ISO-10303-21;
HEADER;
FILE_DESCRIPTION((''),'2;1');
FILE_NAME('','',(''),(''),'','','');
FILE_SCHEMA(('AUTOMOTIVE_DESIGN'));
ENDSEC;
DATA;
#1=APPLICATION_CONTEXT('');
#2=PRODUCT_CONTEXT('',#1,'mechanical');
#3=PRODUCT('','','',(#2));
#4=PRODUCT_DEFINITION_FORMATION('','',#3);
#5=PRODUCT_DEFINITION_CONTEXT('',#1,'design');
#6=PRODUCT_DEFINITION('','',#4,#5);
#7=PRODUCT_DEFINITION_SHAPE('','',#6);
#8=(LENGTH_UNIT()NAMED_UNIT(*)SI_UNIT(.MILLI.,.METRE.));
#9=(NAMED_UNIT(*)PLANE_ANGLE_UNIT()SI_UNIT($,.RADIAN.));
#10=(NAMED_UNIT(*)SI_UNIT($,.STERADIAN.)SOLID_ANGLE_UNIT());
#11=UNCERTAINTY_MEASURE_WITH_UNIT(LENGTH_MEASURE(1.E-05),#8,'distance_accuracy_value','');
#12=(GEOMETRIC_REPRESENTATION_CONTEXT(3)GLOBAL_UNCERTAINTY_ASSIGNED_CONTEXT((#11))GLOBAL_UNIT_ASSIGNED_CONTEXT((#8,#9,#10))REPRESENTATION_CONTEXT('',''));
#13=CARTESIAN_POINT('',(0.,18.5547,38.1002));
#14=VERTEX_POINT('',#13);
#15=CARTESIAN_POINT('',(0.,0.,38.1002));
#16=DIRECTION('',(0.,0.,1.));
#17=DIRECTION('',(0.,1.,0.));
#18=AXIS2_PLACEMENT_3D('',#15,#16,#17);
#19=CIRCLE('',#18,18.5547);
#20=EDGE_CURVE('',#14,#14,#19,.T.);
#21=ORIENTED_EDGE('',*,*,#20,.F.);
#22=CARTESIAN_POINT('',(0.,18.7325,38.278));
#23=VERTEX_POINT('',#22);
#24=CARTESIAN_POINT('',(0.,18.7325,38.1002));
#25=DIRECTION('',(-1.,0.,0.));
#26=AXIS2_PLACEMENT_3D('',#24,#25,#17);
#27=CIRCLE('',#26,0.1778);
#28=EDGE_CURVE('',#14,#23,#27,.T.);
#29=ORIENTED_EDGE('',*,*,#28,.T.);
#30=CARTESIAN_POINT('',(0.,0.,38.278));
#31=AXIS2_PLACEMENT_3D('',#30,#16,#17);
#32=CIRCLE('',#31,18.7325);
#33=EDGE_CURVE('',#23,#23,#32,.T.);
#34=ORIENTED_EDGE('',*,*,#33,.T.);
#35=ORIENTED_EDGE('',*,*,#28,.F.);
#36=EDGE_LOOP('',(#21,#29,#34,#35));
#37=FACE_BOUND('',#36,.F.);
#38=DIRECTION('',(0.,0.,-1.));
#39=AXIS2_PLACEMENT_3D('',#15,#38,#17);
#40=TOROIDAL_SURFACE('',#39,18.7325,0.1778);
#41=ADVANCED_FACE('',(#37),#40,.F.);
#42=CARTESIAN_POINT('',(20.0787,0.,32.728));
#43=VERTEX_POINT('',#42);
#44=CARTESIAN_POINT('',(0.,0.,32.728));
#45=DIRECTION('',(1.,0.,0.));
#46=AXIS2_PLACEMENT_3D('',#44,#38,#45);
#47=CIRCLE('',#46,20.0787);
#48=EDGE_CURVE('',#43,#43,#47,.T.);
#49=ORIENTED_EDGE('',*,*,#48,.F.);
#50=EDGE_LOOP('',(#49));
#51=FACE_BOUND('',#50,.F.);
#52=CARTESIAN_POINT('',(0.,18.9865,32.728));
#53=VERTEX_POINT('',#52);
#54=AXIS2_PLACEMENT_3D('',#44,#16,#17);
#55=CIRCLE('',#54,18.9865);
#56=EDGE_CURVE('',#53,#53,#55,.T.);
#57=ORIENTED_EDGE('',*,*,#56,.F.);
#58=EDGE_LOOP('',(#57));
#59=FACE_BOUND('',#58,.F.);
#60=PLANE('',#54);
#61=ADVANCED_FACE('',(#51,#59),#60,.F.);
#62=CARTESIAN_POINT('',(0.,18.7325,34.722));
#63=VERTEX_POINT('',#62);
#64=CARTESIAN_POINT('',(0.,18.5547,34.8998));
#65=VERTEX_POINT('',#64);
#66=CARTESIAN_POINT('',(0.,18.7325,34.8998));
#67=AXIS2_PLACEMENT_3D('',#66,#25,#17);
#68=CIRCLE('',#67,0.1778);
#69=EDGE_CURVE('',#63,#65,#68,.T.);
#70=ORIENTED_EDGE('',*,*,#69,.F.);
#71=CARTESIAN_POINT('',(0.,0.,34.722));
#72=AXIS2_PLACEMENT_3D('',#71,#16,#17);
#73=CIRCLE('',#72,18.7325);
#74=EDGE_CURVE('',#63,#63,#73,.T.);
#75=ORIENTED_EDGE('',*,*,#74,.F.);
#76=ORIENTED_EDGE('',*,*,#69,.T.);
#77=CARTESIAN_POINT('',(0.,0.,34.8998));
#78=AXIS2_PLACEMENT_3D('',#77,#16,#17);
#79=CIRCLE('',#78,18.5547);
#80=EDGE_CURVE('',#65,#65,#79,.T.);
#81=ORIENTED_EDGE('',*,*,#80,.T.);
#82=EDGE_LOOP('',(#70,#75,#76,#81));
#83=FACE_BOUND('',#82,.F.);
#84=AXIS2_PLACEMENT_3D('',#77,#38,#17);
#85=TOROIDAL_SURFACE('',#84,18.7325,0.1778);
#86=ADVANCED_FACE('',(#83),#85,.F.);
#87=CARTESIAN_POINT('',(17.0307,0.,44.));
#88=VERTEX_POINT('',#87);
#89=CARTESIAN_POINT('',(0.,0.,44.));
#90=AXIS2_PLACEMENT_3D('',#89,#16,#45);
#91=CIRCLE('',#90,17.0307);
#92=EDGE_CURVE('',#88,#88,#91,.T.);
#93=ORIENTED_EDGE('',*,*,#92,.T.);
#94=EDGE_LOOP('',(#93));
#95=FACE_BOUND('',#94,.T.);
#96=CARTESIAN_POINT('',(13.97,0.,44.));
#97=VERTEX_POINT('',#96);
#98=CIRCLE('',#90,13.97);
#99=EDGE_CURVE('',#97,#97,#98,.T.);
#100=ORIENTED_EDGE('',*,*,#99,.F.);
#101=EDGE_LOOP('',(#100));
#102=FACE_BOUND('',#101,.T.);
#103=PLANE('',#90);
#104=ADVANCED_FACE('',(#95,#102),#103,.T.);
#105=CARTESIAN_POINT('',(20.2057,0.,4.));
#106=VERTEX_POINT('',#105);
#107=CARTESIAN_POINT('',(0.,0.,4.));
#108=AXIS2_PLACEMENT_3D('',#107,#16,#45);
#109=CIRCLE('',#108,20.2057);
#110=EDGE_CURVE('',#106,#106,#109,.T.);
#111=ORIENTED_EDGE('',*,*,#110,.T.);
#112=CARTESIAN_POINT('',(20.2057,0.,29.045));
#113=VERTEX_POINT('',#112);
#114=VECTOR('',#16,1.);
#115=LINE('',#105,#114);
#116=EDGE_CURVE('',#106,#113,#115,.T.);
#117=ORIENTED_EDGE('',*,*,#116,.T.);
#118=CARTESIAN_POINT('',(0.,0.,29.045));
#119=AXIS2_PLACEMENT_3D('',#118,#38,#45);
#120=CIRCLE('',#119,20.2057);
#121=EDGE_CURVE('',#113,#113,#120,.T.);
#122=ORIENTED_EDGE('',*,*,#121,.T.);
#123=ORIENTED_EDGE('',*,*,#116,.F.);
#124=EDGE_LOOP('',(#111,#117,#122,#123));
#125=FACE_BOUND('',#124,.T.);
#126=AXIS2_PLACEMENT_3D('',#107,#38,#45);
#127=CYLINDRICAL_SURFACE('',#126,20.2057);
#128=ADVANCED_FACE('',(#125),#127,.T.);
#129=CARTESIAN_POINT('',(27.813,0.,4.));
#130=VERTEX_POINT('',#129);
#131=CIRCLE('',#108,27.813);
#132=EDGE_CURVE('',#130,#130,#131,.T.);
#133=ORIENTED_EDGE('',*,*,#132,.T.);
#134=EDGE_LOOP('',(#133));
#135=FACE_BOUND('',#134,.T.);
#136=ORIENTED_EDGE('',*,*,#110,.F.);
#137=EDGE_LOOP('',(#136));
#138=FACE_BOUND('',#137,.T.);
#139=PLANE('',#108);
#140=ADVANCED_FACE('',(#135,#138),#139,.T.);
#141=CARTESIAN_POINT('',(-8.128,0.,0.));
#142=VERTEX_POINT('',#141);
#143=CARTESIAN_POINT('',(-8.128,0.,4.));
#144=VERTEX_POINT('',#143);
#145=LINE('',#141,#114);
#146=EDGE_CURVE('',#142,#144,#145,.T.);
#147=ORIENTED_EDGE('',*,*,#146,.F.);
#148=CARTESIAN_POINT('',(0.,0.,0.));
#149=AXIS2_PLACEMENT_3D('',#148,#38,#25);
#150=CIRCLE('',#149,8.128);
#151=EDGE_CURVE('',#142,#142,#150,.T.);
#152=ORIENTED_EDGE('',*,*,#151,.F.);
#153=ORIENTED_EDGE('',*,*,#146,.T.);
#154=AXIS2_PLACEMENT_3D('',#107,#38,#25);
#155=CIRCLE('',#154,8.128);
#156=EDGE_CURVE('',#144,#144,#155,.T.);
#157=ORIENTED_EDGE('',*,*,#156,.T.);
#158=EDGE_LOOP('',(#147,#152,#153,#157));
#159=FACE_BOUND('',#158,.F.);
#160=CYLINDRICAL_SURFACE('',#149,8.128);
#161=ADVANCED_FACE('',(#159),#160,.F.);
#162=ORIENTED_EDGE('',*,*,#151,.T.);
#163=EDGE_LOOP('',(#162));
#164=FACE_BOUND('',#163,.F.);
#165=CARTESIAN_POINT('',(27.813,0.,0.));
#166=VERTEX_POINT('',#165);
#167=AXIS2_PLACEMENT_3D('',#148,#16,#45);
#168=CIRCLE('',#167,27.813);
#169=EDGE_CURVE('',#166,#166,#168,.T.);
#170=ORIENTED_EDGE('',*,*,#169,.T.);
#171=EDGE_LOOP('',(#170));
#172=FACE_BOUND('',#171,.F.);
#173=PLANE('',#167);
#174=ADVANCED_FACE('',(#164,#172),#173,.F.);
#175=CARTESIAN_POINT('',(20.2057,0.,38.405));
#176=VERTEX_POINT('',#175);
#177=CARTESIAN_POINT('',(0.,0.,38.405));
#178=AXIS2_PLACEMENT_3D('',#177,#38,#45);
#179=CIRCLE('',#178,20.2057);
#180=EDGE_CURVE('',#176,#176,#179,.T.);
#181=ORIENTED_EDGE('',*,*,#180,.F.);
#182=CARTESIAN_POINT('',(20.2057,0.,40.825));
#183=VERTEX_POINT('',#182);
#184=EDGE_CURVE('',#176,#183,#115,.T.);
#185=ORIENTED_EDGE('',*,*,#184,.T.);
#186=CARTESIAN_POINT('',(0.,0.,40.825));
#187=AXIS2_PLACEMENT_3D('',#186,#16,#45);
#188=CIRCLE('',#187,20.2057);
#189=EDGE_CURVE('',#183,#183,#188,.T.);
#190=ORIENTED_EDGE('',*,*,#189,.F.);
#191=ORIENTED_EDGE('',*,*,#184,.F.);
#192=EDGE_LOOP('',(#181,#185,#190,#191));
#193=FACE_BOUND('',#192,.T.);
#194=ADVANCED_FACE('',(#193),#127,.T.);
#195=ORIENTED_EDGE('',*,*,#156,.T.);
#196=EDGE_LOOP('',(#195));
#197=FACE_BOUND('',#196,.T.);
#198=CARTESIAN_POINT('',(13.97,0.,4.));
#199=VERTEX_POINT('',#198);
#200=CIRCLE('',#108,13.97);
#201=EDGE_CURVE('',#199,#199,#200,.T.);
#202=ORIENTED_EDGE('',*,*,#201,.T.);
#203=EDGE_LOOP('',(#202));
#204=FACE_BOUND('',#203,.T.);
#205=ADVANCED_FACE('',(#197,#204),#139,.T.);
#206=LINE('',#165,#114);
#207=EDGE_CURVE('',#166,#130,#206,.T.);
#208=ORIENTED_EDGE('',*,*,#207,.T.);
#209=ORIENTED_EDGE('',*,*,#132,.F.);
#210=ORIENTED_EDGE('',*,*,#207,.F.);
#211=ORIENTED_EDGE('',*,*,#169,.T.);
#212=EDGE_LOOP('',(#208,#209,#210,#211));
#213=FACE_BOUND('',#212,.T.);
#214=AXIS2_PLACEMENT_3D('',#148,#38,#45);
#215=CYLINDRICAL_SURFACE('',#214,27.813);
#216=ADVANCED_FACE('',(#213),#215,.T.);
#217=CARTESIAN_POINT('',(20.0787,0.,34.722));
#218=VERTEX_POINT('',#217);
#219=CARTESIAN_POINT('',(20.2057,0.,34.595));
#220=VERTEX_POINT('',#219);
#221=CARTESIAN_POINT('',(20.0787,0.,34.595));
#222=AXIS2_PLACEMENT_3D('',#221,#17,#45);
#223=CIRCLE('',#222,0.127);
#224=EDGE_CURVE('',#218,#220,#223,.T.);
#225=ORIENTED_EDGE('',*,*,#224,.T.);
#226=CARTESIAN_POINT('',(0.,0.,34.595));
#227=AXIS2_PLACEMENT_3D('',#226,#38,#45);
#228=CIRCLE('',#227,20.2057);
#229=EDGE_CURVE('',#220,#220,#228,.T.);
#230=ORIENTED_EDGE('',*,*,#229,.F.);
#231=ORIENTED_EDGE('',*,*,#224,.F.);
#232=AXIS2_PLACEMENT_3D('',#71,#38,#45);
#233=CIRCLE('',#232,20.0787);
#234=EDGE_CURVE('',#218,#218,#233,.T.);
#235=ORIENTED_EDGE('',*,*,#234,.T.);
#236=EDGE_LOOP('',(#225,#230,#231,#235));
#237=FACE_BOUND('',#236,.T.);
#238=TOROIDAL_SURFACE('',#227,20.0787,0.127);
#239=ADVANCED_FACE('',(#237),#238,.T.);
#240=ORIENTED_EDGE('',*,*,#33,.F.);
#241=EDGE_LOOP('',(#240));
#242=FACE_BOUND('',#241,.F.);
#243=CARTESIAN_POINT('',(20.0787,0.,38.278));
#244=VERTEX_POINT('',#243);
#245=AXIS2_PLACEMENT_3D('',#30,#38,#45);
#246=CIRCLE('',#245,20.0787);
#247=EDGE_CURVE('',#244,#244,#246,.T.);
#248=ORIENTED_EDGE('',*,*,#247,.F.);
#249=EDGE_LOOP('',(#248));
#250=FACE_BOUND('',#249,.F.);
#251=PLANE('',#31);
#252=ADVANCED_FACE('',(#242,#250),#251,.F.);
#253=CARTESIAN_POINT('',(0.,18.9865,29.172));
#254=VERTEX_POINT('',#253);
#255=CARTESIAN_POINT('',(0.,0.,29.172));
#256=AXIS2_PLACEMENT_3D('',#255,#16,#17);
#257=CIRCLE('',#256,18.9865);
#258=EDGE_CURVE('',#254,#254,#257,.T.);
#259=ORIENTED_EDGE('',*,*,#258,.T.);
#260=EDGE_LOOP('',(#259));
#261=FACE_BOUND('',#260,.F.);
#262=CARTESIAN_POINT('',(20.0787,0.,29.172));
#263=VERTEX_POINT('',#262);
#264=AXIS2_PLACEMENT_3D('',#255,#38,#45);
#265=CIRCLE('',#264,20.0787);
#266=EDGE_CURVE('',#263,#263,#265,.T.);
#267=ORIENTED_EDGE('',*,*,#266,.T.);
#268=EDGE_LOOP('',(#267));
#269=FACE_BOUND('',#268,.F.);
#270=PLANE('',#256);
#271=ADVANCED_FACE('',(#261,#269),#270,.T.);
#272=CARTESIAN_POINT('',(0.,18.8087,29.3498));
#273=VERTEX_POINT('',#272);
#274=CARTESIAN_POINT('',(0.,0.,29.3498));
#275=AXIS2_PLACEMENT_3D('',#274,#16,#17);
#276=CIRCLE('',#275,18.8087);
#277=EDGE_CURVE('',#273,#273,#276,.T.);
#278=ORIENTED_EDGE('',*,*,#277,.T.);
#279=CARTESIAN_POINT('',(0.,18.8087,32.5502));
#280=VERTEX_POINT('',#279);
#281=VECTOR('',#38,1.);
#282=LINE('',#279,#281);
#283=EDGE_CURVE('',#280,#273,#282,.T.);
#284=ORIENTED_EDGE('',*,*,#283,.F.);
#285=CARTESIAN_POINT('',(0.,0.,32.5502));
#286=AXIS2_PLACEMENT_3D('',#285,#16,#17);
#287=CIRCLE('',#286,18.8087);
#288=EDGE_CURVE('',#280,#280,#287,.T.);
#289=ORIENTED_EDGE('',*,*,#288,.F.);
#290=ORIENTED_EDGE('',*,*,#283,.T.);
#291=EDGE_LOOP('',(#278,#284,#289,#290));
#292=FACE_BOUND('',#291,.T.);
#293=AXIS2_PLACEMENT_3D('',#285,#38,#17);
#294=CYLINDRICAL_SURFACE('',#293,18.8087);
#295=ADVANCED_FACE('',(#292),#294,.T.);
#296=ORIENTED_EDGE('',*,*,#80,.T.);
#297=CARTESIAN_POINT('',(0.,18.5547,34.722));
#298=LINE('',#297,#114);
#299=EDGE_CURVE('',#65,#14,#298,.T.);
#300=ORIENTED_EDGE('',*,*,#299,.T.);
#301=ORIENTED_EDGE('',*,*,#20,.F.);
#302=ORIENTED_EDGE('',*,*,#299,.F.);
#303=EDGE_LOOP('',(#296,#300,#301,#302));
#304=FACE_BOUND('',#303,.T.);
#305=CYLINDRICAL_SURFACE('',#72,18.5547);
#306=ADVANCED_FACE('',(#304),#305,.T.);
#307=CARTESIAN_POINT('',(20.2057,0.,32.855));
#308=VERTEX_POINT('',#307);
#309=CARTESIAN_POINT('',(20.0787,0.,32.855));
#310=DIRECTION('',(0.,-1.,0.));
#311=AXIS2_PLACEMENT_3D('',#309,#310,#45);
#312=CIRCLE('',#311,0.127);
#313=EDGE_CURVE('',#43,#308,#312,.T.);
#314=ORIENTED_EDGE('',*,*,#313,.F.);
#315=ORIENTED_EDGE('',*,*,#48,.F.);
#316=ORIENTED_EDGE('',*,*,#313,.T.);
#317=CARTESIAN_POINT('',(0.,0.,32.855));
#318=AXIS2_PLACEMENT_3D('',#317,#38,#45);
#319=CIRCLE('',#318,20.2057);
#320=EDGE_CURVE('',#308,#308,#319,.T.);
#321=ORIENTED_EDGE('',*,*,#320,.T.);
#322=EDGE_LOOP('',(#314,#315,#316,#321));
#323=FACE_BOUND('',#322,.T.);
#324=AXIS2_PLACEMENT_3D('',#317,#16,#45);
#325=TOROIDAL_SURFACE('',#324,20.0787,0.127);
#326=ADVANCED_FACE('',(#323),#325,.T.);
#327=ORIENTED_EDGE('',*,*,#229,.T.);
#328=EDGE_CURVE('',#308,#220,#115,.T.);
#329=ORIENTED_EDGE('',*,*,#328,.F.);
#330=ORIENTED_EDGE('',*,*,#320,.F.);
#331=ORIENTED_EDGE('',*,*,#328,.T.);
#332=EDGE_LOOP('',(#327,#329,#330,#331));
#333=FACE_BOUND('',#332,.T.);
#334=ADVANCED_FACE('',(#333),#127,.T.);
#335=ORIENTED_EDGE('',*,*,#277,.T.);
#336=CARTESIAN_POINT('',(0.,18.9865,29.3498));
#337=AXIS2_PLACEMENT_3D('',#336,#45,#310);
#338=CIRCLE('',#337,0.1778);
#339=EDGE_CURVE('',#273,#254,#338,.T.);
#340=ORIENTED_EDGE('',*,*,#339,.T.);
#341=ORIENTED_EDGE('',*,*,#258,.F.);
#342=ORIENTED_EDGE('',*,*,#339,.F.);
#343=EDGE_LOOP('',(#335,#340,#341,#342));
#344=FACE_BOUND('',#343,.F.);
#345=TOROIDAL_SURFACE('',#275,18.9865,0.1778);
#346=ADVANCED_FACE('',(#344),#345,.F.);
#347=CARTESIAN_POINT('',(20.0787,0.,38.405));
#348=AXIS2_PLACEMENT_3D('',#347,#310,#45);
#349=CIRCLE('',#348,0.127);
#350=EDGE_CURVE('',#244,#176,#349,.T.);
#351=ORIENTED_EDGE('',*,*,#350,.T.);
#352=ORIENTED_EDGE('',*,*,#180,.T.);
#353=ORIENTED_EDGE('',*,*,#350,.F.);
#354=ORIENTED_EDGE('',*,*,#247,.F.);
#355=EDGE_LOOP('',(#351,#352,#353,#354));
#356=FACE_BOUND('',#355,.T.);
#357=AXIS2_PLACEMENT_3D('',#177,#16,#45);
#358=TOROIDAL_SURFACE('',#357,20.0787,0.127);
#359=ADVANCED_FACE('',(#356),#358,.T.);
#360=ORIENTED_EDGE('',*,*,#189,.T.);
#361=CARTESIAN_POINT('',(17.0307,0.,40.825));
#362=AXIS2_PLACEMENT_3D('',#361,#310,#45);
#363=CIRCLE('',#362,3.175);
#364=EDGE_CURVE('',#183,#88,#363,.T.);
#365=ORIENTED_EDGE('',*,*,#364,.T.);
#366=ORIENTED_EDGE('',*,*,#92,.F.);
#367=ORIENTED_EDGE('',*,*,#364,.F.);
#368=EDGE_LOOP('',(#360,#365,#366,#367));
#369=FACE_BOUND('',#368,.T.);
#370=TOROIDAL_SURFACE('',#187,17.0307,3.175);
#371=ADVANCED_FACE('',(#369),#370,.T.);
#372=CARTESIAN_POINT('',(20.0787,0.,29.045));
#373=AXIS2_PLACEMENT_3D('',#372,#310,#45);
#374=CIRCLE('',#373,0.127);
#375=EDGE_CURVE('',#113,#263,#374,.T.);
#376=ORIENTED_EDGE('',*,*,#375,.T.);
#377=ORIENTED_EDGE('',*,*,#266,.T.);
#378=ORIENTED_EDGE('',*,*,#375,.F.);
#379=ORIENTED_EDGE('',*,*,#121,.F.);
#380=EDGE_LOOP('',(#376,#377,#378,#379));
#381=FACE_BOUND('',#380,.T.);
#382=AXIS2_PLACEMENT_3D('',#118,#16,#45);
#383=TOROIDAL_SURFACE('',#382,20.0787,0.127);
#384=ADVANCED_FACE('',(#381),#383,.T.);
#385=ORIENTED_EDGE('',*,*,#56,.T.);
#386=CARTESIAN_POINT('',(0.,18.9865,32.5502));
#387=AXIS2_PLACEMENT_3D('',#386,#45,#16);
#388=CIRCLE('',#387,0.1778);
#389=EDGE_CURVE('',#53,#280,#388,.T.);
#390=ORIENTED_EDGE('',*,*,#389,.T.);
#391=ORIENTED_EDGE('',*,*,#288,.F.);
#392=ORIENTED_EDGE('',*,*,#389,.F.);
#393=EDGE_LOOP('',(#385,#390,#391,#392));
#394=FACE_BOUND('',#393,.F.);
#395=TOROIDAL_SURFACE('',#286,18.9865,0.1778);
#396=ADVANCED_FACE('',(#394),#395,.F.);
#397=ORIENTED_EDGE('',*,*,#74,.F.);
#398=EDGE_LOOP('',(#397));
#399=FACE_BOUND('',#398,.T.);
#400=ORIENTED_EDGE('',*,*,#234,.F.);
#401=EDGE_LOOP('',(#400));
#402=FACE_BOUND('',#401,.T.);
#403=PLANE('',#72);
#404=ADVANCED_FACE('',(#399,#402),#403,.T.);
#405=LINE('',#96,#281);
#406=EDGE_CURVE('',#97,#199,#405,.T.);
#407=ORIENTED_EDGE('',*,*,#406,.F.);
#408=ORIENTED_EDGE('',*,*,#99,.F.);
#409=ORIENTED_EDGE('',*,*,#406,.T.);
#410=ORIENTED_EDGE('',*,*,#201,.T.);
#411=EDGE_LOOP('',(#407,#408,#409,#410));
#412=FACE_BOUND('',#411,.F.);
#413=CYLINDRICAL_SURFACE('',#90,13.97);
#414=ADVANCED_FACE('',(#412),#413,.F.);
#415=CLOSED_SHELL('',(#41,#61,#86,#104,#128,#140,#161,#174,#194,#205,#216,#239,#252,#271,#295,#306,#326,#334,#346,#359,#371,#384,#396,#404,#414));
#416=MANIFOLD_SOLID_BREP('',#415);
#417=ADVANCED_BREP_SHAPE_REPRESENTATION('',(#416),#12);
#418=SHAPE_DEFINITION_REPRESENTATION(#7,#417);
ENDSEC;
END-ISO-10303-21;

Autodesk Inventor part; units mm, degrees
ref_plane "YZ Plane" through (0, 0, 0) normal (1, 0, 0) x (0, 1, 0)
ref_plane "XZ Plane" through (0, 0, 0) normal (0, 1, 0) x (-1, 0, 0)
ref_plane "XY Plane" through (0, 0, 0) normal (0, 0, 1) x (1, 0, 0)
sketch "Sketch1" plane through (0, 0, 0) normal (0, 0, 1) x (1, 0, 0)
  circle A0 centre (0, 0) radius 27.813
  dimension "d0" = 55.626
extrude "Extrusion1" add sketch "Sketch1" along normal blind 4
sketch "Sketch2" plane through (0, 0, 4) normal (0, 0, 1) x (1, 0, 0)
  circle A0 centre (0, 0) radius 20.2057
  dimension "d3" = 40.4114
extrude "Extrusion2" add sketch "Sketch2" along normal blind 40
sketch "Sketch5" plane through (0, 0, 0) normal (0, 0, -1) x (-1, 0, 0)
  circle A0 centre (0, 0) radius 3.5052
  dimension "d14" = 7.0104
extrude "Extrusion5" cut sketch "Sketch5" against normal blind 16.256
thread "Thread1" size "M16x1.5" class "6H" standard "ISO Metric profile" length 4
sketch "Sketch7" plane through (0, 0, 0) normal (1, 0, 0) x (0, 1, 0)
  line L0 (20.2057, 44) -> (-20.2057, 44) projected
  line L1 (-20.2057, 4) -> (-20.2057, 44) projected
  line L2 (20.4597, 29.172) -> (20.4597, 32.728)
  line L3 (18.9865, 29.172) -> (20.4597, 29.172)
  line L4 (20.4597, 32.728) -> (18.9865, 32.728)
  line L5 (18.8087, 32.5502) -> (18.8087, 29.3498)
  arc A0 (18.9865, 32.728) -> (18.8087, 32.5502) centre (18.9865, 32.5502) ccw
  arc A1 (18.8087, 29.3498) -> (18.9865, 29.172) centre (18.9865, 29.3498) ccw
  line L6 (0, -8.8) -> (0, 52.8) projected
  point P0 (0, 0)
  point P1 (18.8087, 29.172)
  dimension "d28" = 1.651
  dimension "d29" = 0.1778
revolve "Revolution1" cut sketch "Sketch7" angle 360 about axis through (0, 0, 4) along (0, 0, 1)
fillet "Fillet1" radius 0.127 1 edges at (-20.2057, 0, 29.172)
fillet "Fillet2" radius 0.127 1 edges at (-20.2057, 0, 32.728)
sketch "Sketch8" plane through (0, 0, 0) normal (1, 0, 0) x (0, 1, 0)
  line L0 (20.2057, 32.855) -> (20.2057, 44) projected
  line L1 (20.2057, 38.278) -> (20.2057, 34.722)
  line L2 (20.2057, 38.278) -> (18.5547, 38.278)
  line L3 (20.2057, 34.722) -> (18.5547, 34.722)
  line L4 (18.5547, 34.722) -> (18.5547, 38.278)
  line L5 (0, -9) -> (0, 54) projected
  point P0 (0, 0)
  point P1 (20.2057, 36.5)
  dimension "d33" = 7.5
  dimension "d34" = 1.778
  dimension "d35" = 1.778
  dimension "d36" = 1.651
  dimension "d37" = 1.651
revolve "Revolution2" cut sketch "Sketch8" angle 360 about axis through (0, 0, 4) along (0, 0, 1)
fillet "Fillet3" radius 0.1778 2 edges at (0, -18.5547, 34.722) (0, -18.5547, 38.278)
fillet "Fillet4" radius 0.127 2 edges at (-20.2057, 0, 38.278) (-20.2057, 0, 34.722)
sketch "Sketch9" plane through (0, 0, 0) normal (0, 0, -1) x (-1, 0, 0)
  circle A0 centre (0, 0) radius 8.128
  dimension "d41" = 16.256
extrude "Extrusion7" cut sketch "Sketch9" against normal blind 10
fillet "Fillet5" radius 3.175 1 edges at (-20.2057, 0, 44)
sketch "Sketch10" plane through (0, 0, 44) normal (0, 0, 1) x (1, 0, 0)
  circle A0 centre (0, 0) radius 13.97
  dimension "d47" = 27.94
extrude "Extrusion8" cut sketch "Sketch10" against normal blind 40
properties part number "PVCTop2"
